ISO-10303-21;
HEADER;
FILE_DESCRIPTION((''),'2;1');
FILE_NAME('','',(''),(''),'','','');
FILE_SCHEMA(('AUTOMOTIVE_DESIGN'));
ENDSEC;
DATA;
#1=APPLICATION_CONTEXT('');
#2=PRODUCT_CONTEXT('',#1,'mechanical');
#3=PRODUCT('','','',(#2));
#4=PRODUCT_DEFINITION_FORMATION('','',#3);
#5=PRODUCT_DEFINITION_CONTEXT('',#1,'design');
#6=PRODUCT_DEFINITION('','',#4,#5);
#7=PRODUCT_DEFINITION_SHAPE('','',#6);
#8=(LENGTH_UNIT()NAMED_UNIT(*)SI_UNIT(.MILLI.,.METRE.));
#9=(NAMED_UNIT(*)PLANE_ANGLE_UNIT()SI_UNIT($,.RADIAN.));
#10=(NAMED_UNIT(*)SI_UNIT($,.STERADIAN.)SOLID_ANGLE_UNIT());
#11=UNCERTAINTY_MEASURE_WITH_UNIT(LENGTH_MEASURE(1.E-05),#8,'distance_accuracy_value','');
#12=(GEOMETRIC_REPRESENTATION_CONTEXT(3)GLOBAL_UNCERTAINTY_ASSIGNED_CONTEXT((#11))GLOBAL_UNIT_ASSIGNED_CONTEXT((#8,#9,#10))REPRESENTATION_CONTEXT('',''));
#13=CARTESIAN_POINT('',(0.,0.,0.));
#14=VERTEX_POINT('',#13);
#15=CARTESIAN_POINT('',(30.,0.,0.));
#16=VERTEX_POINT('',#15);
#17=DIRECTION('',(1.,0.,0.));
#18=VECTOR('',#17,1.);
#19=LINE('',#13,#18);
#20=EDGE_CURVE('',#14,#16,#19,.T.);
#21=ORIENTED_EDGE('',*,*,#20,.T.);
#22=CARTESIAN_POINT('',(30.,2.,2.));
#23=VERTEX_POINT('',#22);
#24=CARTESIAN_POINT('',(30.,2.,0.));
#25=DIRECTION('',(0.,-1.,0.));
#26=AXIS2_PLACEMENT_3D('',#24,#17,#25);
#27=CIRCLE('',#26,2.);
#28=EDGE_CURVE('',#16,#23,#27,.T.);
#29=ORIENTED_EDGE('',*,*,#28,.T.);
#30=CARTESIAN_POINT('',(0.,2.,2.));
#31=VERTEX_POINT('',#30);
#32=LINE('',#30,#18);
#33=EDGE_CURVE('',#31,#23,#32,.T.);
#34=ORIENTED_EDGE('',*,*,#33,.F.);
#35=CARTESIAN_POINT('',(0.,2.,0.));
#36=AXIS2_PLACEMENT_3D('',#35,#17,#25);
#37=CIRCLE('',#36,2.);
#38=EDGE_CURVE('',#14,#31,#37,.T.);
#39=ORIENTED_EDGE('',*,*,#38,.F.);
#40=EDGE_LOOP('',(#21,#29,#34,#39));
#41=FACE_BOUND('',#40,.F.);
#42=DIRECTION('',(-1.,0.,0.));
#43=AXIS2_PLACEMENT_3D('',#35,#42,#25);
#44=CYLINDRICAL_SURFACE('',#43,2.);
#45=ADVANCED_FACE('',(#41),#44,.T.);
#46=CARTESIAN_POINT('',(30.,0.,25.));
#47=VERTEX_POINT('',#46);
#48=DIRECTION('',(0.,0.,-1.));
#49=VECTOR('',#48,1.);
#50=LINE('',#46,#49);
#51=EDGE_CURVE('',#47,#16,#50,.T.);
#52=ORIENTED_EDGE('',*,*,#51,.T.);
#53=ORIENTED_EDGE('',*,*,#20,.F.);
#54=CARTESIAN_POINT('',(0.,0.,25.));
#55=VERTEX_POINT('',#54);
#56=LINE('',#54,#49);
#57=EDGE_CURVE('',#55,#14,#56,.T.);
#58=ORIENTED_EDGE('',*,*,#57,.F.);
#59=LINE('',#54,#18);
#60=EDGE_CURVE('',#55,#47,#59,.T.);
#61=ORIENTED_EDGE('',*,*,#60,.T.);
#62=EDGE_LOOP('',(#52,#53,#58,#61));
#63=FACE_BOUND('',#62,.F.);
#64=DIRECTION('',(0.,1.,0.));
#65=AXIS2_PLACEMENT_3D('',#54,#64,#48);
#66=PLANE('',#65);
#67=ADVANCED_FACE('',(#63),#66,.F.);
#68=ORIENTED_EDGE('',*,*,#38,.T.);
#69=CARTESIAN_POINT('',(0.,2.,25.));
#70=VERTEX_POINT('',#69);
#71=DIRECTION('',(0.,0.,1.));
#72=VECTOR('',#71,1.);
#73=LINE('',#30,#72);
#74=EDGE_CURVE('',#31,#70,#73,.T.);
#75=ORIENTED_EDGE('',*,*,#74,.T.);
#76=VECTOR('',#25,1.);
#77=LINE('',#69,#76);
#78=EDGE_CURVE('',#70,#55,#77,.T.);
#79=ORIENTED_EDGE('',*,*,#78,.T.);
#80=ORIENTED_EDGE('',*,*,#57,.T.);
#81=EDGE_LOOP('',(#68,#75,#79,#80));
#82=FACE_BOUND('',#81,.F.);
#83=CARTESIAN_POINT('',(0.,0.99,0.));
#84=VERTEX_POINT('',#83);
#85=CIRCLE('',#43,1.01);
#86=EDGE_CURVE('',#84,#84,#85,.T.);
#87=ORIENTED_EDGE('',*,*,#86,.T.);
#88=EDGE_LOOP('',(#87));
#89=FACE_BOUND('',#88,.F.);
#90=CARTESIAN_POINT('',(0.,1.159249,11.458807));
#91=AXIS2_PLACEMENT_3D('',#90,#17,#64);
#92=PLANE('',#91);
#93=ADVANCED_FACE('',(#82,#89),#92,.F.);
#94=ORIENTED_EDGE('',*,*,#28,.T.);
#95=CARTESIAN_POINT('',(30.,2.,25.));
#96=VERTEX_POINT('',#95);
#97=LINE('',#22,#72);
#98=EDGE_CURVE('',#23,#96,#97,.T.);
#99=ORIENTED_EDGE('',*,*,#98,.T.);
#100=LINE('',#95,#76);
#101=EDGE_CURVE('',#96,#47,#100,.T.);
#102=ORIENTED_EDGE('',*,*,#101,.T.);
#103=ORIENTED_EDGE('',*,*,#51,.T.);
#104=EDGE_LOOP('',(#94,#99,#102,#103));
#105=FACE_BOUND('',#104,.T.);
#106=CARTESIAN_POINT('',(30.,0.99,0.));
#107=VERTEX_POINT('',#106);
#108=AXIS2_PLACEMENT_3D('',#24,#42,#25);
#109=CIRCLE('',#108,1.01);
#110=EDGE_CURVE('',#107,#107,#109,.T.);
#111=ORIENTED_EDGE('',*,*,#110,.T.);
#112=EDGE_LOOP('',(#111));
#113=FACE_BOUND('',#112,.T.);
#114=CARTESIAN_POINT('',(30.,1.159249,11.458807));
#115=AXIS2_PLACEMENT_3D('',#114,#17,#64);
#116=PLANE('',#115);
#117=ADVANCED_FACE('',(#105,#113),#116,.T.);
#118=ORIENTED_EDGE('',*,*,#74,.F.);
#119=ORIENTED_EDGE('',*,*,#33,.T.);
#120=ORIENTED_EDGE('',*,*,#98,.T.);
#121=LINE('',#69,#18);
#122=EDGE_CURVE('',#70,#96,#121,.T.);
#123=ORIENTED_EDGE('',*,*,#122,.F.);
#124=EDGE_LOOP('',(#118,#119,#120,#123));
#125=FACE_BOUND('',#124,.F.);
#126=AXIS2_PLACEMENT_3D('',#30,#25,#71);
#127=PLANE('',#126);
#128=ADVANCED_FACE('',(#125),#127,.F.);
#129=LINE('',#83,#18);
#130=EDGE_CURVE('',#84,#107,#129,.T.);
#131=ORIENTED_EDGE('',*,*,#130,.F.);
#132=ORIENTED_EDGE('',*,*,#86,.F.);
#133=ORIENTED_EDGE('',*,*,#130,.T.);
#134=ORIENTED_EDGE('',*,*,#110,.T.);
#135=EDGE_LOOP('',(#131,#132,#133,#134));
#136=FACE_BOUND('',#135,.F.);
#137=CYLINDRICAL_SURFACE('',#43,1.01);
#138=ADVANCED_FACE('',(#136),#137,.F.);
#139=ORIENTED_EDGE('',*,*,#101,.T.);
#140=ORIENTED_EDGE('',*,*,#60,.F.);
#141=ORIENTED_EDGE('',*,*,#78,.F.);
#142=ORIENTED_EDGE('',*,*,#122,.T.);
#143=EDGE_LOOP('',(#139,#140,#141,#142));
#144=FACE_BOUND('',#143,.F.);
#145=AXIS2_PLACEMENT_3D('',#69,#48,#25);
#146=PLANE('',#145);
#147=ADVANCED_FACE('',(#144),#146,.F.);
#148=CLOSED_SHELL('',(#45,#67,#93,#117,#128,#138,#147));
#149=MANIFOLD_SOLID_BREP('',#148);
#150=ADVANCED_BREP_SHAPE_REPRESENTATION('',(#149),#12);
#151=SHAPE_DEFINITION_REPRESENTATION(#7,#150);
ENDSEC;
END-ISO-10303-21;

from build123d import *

# Parameters (mm, degrees)
F2_DEPTH = 30


# Not quite as in the source:
# - a feature of the source that left no trace in its solid (it failed there, or was rolled back) is left out


with BuildPart() as f2:
    # F1 (on Right) → F2 (new body)
    with BuildSketch(Plane.YZ):
        with BuildLine():
            Line((0, 25), (0, 0))
            ThreePointArc((0, 0), (3.4142135624, -1.4142135624), (2, 2))
            Line((2, 2), (2, 25))
            Line((2, 25), (0, 25))
        make_face()
        with BuildLine():
            ThreePointArc((3.01, 0), (2, -1.01), (0.99, 0))
            ThreePointArc((0.99, 0), (2, 1.01), (3.01, 0))
        make_face(mode=Mode.SUBTRACT)
    extrude(amount=F2_DEPTH)


solid = f2.part
